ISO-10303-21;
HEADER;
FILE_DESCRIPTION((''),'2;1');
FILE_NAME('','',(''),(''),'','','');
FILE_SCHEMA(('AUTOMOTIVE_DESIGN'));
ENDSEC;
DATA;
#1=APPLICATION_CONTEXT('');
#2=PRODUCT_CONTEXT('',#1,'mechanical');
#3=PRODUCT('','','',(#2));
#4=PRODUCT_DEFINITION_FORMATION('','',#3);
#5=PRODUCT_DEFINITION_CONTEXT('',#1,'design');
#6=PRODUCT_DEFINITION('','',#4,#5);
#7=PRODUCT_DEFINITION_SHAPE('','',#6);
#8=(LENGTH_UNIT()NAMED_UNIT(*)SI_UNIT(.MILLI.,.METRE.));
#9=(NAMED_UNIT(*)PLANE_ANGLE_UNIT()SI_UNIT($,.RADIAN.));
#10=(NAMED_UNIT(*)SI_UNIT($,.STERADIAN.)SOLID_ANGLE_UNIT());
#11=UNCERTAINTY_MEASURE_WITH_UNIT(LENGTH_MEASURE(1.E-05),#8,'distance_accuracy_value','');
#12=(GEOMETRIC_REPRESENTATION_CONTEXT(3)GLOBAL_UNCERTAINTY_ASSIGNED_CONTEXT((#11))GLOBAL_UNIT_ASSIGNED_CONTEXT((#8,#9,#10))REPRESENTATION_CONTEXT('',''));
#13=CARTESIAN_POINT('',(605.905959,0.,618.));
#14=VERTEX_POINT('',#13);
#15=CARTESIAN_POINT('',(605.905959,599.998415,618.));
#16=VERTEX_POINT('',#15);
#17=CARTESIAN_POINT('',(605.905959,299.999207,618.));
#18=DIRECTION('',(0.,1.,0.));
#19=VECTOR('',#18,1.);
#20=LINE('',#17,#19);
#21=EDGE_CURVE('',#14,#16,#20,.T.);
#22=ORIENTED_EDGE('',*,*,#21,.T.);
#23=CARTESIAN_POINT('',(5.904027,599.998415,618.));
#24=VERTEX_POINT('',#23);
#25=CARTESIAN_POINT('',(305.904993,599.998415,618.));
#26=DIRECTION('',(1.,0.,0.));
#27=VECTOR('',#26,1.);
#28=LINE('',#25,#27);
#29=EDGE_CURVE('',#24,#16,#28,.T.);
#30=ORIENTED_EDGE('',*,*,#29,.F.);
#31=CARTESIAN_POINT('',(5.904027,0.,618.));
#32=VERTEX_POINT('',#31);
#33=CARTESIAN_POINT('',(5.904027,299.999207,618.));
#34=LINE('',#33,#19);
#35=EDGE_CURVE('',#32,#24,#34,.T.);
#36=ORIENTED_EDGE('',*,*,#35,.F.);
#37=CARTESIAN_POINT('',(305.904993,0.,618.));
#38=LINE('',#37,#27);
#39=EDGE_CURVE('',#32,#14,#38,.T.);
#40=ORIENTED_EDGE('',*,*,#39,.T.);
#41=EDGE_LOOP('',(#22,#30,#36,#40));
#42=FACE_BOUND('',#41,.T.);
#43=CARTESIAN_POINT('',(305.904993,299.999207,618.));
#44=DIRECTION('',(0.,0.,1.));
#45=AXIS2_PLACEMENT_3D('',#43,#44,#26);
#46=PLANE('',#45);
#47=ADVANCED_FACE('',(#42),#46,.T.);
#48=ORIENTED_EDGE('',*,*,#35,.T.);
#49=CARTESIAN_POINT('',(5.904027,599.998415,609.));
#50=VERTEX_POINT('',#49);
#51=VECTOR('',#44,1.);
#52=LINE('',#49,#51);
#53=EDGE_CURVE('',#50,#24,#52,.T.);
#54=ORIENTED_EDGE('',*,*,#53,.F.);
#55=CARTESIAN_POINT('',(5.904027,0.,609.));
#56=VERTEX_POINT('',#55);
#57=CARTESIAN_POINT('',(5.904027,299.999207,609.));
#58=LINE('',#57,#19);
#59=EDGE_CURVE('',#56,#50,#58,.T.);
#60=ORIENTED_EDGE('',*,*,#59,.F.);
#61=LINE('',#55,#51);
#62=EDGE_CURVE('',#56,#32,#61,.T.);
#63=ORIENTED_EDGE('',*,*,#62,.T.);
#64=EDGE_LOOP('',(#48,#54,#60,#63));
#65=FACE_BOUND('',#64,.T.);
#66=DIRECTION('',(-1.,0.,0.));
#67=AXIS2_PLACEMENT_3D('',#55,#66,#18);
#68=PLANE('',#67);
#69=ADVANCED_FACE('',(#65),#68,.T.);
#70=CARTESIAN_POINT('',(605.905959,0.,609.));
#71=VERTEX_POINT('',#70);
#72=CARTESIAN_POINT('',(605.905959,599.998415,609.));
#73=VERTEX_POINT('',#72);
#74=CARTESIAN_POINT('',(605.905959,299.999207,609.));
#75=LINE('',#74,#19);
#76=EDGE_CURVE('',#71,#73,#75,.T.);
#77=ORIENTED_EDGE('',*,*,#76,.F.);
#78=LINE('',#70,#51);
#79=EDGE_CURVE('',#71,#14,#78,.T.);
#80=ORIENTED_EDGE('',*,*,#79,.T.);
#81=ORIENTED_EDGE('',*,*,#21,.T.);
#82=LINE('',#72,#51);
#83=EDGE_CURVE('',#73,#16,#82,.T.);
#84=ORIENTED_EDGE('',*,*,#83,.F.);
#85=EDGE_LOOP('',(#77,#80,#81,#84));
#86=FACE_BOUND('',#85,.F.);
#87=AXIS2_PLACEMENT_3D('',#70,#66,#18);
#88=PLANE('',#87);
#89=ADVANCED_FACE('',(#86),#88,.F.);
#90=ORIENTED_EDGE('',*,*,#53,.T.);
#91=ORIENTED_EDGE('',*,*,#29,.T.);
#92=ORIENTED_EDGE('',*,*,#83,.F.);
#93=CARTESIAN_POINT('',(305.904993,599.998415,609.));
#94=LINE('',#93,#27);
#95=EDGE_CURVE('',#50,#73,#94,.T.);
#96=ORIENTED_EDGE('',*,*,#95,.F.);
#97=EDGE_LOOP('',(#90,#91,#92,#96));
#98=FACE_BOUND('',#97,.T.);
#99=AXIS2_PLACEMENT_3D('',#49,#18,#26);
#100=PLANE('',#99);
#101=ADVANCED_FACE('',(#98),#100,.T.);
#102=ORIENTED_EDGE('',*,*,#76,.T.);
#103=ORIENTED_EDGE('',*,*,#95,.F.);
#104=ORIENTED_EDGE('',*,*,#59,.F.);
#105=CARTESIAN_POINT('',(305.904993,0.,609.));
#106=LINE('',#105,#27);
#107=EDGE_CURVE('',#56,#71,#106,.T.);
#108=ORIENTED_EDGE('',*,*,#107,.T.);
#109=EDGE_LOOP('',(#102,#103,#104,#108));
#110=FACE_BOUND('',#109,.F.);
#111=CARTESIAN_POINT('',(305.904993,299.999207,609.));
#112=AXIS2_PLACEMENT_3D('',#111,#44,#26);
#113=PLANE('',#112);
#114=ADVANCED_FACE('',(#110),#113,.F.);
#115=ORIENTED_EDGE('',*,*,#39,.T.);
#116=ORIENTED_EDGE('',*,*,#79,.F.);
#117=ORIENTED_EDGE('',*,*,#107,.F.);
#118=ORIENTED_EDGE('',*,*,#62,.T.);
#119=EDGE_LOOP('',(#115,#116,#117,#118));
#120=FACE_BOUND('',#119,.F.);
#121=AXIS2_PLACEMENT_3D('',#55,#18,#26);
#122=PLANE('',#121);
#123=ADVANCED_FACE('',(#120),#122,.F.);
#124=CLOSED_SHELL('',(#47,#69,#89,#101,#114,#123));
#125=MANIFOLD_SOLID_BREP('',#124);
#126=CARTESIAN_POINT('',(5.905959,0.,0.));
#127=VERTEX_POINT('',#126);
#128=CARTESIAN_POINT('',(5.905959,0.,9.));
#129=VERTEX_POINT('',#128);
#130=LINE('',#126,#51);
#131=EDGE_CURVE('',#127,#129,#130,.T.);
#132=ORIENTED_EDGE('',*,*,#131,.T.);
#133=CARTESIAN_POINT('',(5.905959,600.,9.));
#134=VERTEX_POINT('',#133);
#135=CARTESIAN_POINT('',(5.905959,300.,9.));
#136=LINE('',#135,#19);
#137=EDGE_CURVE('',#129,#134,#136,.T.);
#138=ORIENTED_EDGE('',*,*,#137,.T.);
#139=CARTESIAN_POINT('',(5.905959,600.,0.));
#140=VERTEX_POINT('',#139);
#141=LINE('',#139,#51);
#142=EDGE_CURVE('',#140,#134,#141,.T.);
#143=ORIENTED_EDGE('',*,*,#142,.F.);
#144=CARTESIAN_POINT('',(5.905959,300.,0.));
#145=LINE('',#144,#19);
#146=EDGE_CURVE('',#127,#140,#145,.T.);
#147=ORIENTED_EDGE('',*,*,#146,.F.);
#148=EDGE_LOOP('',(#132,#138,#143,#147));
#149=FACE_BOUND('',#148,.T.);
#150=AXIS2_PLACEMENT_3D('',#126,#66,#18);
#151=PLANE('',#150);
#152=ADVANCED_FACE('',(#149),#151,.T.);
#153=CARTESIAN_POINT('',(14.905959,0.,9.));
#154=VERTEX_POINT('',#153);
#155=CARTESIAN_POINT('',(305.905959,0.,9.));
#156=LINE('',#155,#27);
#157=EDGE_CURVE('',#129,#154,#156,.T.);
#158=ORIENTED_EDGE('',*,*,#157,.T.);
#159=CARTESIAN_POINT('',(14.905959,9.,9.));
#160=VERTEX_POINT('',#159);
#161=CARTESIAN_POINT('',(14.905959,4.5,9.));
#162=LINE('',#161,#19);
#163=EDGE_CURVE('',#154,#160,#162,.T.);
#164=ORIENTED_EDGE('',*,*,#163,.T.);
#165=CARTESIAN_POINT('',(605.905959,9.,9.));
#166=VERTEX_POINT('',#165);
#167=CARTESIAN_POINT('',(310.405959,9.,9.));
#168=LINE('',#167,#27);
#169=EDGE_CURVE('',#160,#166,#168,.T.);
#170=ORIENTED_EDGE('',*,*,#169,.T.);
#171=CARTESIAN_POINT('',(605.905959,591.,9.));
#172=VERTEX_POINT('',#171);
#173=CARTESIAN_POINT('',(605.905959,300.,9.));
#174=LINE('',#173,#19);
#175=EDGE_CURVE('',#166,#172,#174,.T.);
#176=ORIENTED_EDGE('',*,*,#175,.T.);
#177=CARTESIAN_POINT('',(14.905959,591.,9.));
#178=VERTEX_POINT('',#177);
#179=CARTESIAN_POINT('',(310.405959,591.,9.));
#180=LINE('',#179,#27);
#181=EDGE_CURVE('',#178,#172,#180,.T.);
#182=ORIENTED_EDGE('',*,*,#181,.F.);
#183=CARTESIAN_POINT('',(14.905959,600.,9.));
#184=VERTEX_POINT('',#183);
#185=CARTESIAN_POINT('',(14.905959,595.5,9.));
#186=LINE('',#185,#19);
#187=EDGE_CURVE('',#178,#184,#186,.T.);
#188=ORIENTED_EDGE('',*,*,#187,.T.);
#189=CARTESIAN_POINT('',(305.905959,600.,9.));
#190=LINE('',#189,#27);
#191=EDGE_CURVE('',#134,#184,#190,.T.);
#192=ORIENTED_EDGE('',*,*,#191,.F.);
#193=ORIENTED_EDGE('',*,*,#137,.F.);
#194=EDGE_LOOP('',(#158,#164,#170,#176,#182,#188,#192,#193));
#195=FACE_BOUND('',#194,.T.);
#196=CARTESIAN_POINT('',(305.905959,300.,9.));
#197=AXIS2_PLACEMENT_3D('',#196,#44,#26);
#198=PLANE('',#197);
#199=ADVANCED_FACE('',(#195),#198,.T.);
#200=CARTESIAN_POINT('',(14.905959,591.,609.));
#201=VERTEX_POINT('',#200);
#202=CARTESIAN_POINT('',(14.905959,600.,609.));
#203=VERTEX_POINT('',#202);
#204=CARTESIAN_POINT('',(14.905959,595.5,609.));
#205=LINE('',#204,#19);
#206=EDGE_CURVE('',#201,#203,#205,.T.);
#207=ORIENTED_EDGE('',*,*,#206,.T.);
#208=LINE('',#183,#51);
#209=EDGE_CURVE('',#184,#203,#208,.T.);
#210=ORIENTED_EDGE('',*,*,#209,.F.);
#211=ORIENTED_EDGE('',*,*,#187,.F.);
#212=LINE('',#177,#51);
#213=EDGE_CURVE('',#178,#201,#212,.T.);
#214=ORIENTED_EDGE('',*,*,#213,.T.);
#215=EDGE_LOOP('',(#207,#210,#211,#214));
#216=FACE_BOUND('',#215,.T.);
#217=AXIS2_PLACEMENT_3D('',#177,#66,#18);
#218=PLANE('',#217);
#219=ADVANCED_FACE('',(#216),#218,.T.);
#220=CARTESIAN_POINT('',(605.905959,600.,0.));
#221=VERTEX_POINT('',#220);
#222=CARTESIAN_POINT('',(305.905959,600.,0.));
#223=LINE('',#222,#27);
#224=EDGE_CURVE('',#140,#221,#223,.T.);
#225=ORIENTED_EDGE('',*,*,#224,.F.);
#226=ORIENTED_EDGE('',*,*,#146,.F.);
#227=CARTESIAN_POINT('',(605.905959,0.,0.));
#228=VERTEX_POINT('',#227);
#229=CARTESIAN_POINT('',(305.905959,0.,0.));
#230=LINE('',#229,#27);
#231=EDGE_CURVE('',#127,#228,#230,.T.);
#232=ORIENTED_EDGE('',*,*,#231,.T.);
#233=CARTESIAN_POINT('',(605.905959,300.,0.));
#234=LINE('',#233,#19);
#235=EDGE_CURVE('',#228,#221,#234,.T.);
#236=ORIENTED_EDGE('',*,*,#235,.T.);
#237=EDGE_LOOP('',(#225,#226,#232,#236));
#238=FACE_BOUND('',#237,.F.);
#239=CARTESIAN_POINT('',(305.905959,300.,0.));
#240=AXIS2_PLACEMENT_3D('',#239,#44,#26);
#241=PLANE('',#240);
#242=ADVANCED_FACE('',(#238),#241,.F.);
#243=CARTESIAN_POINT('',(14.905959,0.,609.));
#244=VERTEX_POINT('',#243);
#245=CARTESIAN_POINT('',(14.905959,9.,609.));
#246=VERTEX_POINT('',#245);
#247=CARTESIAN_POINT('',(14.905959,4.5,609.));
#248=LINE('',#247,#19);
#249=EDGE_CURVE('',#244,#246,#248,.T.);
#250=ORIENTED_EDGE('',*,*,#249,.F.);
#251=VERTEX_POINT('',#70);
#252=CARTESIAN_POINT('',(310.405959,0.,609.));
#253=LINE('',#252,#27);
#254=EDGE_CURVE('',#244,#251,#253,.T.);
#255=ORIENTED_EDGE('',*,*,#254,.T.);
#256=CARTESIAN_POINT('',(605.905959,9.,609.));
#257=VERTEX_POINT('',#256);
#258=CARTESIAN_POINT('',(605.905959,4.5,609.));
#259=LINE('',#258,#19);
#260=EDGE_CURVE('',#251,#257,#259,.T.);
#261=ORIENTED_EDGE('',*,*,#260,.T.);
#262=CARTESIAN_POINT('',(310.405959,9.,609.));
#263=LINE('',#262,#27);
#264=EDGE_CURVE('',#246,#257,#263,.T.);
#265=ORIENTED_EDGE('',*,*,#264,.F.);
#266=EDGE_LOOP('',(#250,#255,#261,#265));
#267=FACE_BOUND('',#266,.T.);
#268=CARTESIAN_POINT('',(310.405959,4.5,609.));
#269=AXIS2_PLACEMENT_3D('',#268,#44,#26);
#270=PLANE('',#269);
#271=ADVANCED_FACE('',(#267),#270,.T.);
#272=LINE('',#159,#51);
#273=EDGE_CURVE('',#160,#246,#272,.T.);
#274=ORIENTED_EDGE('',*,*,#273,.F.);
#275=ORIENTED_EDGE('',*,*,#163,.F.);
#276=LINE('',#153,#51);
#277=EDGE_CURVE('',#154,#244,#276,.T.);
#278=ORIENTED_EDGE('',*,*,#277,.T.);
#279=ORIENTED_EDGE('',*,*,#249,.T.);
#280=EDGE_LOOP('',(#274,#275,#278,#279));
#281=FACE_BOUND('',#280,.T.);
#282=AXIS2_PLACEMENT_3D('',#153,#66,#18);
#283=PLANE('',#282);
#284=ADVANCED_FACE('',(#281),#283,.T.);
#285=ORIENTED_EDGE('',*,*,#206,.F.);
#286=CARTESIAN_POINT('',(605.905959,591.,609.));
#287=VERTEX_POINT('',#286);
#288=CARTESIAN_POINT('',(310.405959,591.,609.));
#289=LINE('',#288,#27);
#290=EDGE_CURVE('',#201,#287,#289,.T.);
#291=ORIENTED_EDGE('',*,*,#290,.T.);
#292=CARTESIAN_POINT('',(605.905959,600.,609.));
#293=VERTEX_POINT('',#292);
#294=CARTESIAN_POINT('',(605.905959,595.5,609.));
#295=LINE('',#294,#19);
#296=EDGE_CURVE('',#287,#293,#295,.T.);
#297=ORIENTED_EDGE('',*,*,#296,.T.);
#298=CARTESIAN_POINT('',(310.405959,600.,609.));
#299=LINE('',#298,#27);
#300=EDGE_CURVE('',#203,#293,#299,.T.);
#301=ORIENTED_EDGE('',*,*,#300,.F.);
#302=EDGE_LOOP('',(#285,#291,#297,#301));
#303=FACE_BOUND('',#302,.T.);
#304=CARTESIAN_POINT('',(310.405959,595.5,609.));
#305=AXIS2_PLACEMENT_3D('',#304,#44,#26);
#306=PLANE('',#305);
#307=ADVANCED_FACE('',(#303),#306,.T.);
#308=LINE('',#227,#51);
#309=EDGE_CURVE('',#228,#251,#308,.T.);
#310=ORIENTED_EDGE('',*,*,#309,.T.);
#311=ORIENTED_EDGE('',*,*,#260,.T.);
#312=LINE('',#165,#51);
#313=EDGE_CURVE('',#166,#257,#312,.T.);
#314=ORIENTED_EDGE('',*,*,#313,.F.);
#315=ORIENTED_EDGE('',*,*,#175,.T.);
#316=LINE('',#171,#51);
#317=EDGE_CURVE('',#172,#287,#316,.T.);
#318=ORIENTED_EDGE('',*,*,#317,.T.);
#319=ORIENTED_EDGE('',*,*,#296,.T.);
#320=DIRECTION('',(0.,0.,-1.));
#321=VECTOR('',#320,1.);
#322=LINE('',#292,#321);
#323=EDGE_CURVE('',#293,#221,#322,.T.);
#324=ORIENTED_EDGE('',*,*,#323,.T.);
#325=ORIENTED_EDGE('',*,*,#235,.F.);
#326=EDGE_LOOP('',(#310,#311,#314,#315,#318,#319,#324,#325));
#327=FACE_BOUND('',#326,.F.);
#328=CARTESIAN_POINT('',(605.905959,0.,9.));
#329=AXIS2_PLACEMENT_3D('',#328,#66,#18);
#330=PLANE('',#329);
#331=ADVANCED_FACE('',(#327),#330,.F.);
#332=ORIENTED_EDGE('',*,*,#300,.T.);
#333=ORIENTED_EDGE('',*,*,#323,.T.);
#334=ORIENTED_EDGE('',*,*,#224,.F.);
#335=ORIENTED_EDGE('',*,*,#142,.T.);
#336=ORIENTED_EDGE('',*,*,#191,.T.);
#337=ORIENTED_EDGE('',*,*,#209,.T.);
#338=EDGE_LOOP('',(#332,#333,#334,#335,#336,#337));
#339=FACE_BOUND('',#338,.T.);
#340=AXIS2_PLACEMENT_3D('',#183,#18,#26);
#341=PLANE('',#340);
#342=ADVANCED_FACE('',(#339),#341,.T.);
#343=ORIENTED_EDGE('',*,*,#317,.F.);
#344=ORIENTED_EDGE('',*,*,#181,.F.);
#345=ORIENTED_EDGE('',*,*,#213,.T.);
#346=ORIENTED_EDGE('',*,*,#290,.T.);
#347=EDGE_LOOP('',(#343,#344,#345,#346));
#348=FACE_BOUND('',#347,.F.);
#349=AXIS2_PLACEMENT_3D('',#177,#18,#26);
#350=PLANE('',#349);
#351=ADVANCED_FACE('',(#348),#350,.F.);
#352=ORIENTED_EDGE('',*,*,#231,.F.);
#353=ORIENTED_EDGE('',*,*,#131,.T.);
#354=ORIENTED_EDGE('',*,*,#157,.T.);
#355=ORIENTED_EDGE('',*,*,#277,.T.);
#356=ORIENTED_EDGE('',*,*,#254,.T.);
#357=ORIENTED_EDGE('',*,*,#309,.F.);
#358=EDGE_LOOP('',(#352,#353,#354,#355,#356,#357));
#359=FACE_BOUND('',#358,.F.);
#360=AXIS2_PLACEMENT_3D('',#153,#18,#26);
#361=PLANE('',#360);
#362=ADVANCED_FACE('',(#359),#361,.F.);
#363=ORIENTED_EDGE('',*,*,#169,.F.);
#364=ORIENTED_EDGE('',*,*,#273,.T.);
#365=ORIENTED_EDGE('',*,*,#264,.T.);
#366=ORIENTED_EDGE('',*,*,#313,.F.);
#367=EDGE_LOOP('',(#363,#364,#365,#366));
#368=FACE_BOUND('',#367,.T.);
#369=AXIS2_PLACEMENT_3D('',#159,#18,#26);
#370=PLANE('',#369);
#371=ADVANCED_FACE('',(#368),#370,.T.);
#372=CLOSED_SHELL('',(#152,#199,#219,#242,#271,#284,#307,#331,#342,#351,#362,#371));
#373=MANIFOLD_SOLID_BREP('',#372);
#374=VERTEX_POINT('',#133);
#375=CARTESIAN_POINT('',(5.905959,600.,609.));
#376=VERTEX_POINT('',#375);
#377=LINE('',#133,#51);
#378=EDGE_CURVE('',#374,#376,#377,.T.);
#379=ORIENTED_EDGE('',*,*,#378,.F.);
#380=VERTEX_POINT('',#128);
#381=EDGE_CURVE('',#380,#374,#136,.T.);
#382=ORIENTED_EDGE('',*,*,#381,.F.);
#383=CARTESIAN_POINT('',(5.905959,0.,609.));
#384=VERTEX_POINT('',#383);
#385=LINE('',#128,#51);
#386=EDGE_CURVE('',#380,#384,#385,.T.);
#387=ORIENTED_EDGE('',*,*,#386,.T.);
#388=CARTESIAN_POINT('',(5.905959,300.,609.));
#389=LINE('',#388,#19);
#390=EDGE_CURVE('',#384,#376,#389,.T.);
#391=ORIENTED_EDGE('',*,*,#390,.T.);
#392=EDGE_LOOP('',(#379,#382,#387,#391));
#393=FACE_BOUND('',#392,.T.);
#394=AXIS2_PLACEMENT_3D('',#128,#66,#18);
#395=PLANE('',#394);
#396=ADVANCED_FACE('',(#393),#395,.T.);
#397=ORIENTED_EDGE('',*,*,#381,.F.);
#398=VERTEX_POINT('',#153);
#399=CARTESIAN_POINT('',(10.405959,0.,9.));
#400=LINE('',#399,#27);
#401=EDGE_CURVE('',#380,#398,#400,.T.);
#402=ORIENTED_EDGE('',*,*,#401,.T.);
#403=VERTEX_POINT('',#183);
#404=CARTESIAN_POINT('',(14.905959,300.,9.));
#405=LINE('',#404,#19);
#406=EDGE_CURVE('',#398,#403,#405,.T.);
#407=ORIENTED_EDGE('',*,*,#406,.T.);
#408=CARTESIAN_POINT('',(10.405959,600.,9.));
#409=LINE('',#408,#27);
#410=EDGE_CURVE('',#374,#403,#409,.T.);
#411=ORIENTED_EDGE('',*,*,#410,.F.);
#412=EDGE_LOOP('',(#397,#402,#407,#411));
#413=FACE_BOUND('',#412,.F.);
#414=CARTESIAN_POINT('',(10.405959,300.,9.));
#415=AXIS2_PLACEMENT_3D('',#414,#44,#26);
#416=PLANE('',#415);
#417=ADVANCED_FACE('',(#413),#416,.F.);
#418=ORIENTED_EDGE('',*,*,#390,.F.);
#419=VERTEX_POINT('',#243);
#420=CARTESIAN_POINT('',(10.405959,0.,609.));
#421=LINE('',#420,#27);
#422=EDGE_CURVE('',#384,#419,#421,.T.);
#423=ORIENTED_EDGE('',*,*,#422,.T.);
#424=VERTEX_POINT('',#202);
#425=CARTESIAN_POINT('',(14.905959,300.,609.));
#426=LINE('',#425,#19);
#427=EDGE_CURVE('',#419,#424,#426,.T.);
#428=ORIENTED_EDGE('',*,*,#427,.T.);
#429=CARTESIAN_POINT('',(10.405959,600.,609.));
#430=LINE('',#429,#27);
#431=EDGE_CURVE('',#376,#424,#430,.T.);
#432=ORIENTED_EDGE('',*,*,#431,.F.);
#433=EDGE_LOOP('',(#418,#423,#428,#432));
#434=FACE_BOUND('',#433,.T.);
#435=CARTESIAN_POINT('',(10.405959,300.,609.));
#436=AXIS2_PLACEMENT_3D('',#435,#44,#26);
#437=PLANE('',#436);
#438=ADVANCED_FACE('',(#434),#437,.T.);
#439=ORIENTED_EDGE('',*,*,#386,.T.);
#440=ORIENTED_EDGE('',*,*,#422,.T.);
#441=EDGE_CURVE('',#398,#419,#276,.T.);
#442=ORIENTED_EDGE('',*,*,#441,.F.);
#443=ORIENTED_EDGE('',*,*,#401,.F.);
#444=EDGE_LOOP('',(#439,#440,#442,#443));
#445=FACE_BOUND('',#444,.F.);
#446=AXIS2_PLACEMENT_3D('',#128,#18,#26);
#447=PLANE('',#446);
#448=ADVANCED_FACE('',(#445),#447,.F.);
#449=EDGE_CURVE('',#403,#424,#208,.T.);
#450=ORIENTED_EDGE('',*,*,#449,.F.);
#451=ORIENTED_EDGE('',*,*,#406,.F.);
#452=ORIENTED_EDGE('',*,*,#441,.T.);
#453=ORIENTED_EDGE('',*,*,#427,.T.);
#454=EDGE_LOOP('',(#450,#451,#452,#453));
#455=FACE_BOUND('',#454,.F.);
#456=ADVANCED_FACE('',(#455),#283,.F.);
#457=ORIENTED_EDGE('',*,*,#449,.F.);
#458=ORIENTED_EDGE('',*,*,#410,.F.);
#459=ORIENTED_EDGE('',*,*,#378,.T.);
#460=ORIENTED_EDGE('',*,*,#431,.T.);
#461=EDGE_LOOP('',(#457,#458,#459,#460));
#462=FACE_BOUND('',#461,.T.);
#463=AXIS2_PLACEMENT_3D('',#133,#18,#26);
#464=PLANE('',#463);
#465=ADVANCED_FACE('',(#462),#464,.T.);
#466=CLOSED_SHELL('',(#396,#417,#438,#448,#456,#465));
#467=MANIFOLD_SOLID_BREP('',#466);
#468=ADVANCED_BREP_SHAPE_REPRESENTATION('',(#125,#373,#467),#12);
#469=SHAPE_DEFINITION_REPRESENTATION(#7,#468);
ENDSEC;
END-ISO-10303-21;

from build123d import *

# Parameters (mm, degrees)
F0_W     = 600
F0_H     = 600
F1_DEPTH = 9
F2_W     = 9
F2_H     = 600
F3_DEPTH = 600
F4_W     = 591
F4_H     = 9
F5_DEPTH = 600
F6_W     = 591
F6_H     = 9
F7_DEPTH = 600
F8_W     = 600.0019320287
F8_H     = 599.9984145164
F9_DEPTH = 9


with BuildPart() as f1:
    # F0 (on Top) → F1 (new body)
    with BuildSketch(Plane.XY):
        with Locations((305.9059588239, 300)):
            Rectangle(F0_W, F0_H)
    extrude(amount=F1_DEPTH)

    # F4 (on face) → F5 (join)
    with BuildSketch(Plane.XY.offset(9)):
        with Locations((310.4059588239, 595.5)):
            Rectangle(F4_W, F4_H)
    extrude(amount=F5_DEPTH)

    # F6 (on face) → F7 (join)
    with BuildSketch(Plane.XY.offset(9)):
        with Locations((310.4059588239, 4.5)):
            Rectangle(F6_W, F6_H)
    extrude(amount=F7_DEPTH)


with BuildPart() as f3:
    # F2 (on face) → F3 (new body)
    with BuildSketch(Plane.XY.offset(9)):
        with Locations((10.4059588239, 300)):
            Rectangle(F2_W, F2_H)
    extrude(amount=F3_DEPTH)


with BuildPart() as f9:
    # F8 (on face) → F9 (new body)
    with BuildSketch(Plane.XY.offset(609)):
        with Locations((305.9049928095, 299.9992072582)):
            Rectangle(F8_W, F8_H)
    extrude(amount=F9_DEPTH)


solid = Compound([f1.part, f3.part, f9.part])
